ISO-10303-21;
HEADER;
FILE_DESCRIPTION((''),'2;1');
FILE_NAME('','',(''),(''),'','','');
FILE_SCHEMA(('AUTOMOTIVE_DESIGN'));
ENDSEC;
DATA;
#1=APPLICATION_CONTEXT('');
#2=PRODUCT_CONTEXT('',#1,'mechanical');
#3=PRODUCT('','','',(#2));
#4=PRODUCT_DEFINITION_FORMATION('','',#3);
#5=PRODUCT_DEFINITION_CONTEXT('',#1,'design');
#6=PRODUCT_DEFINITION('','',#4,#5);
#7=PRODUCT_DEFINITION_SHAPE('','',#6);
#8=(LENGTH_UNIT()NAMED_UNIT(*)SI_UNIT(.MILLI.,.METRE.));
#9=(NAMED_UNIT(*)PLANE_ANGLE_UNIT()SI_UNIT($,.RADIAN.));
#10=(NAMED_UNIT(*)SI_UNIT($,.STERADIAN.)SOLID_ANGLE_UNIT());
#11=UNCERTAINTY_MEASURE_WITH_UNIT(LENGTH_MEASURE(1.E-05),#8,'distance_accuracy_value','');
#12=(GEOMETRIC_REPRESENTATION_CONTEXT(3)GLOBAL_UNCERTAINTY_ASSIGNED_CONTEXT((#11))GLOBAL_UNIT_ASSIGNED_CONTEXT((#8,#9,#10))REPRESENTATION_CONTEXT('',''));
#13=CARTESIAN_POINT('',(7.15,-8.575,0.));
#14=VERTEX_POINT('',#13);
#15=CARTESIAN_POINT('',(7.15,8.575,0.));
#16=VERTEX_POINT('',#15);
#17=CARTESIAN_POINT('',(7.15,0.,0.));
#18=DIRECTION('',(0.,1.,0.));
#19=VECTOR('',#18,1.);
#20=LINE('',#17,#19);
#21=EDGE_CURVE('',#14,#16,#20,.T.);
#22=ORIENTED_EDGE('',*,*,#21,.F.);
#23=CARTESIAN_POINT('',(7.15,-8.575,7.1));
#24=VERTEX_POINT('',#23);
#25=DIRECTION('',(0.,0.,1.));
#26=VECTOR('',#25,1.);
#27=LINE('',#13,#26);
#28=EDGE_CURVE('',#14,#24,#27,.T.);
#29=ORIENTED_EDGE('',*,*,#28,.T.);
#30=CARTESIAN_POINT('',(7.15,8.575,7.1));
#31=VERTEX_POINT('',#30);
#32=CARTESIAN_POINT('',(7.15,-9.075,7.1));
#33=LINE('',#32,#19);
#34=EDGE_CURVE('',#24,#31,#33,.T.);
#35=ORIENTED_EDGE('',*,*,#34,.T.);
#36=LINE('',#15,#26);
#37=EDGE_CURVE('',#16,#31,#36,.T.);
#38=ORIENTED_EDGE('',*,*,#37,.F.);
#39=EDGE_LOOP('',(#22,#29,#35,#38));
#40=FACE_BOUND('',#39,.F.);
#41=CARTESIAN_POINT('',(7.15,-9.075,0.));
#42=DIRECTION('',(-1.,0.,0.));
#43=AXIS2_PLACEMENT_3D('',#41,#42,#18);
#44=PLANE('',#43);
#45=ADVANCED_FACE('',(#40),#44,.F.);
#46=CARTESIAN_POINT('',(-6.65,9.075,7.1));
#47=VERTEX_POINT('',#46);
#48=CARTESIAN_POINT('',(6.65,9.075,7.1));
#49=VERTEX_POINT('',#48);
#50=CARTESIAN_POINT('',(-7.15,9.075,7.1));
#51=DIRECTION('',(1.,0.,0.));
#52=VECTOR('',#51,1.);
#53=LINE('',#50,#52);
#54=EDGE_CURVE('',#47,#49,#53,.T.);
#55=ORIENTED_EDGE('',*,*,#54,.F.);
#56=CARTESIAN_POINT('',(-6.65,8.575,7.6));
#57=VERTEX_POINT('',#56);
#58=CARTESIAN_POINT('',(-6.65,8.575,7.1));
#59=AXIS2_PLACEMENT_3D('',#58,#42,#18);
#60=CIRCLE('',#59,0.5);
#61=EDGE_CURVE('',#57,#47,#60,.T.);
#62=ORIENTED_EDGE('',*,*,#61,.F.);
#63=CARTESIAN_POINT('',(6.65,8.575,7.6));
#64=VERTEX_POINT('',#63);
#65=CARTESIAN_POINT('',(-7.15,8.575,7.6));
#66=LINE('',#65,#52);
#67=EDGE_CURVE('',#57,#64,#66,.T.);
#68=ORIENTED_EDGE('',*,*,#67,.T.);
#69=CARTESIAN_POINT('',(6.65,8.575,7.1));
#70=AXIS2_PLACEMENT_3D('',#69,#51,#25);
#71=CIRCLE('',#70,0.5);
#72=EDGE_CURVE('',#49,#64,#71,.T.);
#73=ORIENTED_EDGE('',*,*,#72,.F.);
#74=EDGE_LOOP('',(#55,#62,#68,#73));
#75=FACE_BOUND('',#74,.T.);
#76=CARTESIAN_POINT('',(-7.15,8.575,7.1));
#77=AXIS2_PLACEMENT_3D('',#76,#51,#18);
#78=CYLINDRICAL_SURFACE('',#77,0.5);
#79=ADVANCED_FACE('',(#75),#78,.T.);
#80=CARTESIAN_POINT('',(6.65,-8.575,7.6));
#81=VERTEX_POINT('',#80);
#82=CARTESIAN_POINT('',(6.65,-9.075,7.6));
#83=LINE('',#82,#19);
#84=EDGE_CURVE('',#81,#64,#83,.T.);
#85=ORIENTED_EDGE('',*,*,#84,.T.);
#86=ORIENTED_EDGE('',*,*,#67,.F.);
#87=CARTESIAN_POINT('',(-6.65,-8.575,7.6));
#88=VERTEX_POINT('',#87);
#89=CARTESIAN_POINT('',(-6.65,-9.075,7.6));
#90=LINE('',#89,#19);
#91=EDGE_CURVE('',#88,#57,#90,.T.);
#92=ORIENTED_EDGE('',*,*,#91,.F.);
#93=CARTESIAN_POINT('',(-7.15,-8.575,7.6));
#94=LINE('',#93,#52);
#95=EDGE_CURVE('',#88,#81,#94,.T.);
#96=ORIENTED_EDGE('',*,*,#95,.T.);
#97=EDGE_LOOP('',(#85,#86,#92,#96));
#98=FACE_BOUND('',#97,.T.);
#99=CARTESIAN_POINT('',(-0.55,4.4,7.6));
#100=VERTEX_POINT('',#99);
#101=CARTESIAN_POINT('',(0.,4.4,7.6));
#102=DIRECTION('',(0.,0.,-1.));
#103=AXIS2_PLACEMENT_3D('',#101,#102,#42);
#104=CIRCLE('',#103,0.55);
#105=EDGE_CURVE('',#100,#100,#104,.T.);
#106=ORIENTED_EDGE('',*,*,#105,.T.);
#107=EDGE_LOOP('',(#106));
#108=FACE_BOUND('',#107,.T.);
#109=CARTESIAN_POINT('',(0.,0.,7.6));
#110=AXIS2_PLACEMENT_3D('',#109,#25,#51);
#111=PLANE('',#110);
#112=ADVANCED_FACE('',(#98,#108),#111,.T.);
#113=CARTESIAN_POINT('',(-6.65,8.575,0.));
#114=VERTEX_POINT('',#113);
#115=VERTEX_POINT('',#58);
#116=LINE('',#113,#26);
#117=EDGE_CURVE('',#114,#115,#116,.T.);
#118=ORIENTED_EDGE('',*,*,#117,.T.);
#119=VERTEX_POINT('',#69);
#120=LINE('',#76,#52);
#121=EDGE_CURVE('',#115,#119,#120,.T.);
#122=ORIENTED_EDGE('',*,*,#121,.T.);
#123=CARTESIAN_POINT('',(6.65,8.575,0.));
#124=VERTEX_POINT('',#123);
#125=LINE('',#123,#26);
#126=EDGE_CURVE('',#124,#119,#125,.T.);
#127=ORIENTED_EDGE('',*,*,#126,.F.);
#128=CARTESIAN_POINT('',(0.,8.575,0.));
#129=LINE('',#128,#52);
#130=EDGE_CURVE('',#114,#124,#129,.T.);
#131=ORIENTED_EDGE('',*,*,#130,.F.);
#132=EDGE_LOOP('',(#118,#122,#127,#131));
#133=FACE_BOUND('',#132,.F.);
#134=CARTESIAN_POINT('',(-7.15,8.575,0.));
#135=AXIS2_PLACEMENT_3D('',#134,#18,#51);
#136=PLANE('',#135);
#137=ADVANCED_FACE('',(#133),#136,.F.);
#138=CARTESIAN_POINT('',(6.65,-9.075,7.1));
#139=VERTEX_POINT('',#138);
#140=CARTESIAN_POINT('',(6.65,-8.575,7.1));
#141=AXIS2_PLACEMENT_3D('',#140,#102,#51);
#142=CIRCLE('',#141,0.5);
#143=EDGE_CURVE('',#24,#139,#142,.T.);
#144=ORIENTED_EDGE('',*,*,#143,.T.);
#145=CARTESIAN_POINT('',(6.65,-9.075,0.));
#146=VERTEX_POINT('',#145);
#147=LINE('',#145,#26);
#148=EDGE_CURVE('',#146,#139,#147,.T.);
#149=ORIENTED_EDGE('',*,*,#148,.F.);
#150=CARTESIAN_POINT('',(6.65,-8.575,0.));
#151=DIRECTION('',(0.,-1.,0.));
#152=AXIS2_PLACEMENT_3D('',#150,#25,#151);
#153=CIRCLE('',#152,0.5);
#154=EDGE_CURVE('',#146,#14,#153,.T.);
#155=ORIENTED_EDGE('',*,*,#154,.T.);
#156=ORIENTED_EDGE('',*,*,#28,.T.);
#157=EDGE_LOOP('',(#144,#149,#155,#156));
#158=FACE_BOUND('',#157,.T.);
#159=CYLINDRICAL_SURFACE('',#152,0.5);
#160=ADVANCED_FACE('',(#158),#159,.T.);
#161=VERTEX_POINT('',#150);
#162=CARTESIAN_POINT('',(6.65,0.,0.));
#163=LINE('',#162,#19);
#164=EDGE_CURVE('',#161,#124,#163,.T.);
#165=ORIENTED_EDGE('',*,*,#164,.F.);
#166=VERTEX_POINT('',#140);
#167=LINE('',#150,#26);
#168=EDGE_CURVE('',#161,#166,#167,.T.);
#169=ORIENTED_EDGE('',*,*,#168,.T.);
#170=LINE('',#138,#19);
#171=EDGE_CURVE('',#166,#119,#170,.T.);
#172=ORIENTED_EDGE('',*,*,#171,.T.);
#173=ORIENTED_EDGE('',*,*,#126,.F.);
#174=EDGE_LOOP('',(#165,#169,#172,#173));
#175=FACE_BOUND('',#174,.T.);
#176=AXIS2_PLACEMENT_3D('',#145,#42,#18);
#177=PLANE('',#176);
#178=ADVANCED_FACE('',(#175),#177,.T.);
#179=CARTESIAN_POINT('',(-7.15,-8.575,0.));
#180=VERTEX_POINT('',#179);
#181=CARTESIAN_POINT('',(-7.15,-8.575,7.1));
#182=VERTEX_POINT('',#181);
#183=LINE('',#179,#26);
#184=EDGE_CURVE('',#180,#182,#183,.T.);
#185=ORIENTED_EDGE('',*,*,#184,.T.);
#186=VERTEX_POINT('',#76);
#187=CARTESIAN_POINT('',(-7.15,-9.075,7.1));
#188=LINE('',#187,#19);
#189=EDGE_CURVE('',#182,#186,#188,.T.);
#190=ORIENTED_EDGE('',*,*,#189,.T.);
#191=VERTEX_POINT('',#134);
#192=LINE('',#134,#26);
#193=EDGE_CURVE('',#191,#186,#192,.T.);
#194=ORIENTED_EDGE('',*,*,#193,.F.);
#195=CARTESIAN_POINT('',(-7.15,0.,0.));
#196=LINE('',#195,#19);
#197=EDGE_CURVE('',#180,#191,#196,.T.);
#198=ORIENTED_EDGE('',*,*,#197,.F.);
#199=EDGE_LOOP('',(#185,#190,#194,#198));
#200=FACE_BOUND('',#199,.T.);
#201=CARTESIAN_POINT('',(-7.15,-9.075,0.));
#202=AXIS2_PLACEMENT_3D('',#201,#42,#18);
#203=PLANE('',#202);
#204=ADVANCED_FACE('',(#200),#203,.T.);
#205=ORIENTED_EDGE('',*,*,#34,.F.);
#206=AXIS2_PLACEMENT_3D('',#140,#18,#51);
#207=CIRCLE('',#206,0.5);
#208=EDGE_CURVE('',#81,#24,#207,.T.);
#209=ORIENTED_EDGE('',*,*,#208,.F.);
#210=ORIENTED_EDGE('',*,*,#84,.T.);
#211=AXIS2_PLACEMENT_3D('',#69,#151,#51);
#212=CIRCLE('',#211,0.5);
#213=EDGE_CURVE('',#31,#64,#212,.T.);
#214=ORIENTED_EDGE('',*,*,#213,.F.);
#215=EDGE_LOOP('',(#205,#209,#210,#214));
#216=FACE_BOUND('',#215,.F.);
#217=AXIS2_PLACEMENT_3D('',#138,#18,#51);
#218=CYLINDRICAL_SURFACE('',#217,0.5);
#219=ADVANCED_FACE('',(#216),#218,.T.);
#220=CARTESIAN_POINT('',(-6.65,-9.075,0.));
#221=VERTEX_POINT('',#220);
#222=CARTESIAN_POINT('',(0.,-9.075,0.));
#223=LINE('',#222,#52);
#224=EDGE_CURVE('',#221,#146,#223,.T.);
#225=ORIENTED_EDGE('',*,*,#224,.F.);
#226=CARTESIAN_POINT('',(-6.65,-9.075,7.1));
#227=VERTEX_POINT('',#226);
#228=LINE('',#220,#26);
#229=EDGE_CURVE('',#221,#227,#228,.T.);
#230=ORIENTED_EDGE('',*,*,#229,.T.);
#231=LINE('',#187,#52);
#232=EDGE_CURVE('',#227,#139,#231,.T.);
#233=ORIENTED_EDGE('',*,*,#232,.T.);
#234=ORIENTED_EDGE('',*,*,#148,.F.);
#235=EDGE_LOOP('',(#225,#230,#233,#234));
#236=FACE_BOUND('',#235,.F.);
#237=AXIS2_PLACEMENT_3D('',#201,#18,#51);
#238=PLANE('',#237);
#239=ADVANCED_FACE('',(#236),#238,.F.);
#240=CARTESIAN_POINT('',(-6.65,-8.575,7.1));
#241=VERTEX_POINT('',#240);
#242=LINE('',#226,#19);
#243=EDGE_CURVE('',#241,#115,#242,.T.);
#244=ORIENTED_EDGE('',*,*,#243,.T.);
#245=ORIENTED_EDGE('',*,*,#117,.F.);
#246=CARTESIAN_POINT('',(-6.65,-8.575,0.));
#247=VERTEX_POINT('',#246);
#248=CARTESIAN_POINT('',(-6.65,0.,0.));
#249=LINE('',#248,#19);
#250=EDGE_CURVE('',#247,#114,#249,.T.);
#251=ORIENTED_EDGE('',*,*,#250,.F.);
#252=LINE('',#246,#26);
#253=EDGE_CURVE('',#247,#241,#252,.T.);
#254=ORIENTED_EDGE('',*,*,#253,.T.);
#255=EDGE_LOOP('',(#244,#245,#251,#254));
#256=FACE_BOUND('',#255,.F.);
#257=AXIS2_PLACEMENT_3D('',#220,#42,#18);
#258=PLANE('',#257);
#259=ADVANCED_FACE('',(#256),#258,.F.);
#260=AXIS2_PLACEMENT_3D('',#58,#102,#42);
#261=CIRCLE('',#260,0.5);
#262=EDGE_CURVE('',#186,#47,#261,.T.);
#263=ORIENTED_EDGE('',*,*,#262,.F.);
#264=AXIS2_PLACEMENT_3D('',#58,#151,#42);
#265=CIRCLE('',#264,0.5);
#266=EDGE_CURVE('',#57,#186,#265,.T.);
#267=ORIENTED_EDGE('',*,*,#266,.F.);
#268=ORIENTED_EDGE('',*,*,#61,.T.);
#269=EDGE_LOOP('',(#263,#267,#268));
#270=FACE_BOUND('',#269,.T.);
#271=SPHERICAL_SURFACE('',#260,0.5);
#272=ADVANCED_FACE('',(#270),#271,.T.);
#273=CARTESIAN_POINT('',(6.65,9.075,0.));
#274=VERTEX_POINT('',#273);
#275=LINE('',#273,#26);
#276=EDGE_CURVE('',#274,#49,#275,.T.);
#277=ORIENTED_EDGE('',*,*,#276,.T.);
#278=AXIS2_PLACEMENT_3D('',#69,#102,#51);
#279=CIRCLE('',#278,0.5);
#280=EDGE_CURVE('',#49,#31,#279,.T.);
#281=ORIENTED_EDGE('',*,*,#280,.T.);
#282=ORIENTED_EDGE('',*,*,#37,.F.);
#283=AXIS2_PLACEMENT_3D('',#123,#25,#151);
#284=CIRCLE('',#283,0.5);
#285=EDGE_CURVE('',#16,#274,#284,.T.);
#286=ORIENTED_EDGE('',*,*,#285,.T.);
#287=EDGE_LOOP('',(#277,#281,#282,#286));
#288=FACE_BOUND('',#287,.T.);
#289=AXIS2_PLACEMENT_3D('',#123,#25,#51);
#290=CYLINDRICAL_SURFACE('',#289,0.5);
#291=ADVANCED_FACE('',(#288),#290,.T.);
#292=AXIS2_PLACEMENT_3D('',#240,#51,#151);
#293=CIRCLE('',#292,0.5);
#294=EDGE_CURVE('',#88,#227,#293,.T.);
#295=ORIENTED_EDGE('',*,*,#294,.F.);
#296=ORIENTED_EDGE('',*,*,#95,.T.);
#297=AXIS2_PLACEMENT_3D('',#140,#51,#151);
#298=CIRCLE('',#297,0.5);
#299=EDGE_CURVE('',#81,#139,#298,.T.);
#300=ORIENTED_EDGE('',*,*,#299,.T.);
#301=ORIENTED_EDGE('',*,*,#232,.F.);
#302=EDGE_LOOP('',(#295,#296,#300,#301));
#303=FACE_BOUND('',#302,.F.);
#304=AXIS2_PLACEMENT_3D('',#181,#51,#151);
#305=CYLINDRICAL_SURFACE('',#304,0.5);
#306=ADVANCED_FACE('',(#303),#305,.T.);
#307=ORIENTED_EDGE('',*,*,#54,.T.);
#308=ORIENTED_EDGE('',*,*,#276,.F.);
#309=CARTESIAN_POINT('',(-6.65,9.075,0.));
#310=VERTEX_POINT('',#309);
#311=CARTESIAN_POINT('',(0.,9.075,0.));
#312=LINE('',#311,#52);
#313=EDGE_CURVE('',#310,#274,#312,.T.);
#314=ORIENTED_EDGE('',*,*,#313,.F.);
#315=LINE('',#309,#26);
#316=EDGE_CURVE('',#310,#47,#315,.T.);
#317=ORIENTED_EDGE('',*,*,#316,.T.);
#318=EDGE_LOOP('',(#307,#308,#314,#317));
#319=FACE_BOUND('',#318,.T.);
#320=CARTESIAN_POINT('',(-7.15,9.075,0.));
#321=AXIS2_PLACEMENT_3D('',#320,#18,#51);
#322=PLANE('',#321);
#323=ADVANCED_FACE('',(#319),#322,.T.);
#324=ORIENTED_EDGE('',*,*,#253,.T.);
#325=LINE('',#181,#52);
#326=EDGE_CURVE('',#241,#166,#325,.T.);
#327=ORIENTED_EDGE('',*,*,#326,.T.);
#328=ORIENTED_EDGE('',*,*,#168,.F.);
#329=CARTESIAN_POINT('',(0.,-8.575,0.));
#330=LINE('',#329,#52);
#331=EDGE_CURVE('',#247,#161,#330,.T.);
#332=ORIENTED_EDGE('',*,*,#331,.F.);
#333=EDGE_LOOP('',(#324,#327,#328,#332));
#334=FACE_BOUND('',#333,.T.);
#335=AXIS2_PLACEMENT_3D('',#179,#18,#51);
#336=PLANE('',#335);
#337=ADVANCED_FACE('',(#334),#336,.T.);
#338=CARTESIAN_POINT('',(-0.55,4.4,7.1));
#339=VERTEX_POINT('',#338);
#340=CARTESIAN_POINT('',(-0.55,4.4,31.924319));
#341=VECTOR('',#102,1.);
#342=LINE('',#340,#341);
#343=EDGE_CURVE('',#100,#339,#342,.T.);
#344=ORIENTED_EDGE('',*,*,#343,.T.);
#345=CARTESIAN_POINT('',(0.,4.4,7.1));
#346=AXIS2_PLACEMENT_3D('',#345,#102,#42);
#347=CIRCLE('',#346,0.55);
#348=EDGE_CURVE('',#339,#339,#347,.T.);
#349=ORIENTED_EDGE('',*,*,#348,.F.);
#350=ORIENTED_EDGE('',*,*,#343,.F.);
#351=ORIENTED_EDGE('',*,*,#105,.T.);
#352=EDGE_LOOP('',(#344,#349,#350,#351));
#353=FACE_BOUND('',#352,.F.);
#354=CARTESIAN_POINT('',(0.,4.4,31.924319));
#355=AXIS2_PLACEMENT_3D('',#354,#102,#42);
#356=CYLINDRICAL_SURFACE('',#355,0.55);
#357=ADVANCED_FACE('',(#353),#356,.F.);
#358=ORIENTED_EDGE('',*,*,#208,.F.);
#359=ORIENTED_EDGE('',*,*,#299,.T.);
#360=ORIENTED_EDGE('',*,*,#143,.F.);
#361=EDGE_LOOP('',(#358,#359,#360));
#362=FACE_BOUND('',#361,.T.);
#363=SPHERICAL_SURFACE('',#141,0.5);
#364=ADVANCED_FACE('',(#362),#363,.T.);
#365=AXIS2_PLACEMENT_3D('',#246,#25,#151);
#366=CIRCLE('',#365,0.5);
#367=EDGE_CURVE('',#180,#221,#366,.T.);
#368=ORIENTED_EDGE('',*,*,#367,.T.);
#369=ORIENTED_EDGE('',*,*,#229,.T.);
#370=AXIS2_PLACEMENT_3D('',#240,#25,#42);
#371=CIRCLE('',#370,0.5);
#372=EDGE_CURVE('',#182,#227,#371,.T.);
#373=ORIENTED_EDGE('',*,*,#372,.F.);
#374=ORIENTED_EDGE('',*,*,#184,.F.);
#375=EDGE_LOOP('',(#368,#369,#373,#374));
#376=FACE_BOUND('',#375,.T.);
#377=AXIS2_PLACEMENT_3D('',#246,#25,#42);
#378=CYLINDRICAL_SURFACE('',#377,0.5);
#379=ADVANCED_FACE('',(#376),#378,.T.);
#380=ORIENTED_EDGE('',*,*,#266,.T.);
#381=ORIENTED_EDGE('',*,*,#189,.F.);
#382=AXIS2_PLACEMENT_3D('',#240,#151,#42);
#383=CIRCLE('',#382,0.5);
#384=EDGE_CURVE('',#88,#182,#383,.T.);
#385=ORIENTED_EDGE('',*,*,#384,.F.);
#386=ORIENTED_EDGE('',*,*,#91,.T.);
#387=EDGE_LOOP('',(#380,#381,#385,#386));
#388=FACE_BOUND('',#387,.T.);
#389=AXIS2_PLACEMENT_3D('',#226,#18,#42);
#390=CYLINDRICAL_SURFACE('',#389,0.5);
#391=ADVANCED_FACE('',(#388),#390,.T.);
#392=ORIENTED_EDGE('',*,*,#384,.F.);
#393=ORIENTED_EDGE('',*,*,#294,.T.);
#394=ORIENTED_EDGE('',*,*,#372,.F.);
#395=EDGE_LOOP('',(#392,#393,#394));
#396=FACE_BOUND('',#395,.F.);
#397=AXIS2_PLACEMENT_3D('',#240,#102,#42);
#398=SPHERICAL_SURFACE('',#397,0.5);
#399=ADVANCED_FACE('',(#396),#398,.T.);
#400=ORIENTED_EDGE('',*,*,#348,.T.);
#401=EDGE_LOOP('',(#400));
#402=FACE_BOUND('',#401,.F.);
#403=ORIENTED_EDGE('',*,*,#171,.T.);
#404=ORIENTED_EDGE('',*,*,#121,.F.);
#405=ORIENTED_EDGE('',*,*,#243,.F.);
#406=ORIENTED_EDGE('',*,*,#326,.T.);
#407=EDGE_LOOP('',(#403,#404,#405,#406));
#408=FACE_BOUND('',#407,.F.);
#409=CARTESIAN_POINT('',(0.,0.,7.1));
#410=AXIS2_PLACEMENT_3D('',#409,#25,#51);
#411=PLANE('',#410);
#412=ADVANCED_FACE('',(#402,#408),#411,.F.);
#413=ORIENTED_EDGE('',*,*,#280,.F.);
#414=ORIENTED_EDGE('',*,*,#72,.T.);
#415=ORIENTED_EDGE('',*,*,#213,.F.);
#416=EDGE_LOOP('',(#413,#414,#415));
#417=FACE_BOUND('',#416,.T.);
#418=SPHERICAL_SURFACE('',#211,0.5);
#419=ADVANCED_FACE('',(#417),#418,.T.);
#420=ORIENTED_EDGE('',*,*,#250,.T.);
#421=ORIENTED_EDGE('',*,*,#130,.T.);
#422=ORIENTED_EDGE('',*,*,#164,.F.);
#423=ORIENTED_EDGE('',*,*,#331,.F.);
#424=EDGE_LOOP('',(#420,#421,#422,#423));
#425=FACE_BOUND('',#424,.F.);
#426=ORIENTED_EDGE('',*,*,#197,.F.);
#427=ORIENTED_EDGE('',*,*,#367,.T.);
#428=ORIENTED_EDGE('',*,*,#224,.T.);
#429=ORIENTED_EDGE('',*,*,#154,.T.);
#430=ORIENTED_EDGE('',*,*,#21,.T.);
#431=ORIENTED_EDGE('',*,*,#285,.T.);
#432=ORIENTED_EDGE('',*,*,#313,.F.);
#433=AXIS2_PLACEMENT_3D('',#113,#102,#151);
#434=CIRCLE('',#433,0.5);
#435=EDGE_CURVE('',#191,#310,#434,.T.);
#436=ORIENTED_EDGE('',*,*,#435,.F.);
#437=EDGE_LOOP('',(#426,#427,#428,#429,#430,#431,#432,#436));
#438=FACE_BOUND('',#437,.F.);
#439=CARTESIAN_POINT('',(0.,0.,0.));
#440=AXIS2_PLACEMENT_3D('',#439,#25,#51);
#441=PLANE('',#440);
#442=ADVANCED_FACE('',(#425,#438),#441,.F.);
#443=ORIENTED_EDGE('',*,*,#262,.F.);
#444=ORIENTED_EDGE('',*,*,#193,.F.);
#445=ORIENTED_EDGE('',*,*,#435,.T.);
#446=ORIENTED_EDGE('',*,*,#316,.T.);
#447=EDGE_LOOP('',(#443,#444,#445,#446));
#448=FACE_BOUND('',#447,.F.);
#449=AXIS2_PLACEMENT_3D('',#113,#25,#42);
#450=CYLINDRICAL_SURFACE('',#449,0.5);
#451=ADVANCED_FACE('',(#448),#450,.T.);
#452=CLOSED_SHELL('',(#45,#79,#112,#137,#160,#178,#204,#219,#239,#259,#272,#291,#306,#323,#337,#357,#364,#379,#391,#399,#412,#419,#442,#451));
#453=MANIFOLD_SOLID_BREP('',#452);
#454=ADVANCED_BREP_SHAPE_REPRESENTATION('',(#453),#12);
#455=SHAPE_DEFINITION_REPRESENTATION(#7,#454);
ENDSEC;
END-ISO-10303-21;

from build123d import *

# Parameters (mm, degrees)
F3_W     = 14.3
F3_H     = 18.15
F4_DEPTH = 7.6
F5_R     = 0.5
F0_T     = 0.5
F2_D     = 1.1


# Not quite as in the source:
# - a shell that OpenCascade refuses in one call is made with other operations: the cavity is built on its own and cut out


with BuildPart() as f4:
    # F3 (on Top) → F4 (new body)
    with BuildSketch(Plane.XY):
        Rectangle(F3_W, F3_H)
    extrude(amount=F4_DEPTH)

    # F5
    f5_edges = [f4.edges().sort_by_distance(p)[0] for p in [
        (-7.15, -9.075, 3.8),
        (7.15, -9.075, 3.8),
        (7.15, 0, 7.6),
        (-7.15, 9.075, 3.8),
        (7.15, 9.075, 3.8),
        (-7.15, 0, 7.6),
        (0, 9.075, 7.6),
        (0, -9.075, 7.6),
    ]]
    fillet(f5_edges, radius=F5_R)

    # F0: shell of thickness 0.5, made by hand


with BuildPart() as f0_core1:
    # F0_t2: copy of F4
    add(f4.part)

    # the walls: a layer under each face that stays
    f0_faces = [f0_core1.faces().sort_by_distance(p)[0] for p in [
        (0, -9.075, 3.55),
        (-7.15, 0, 3.55),
        (7.15, 0, 3.55),
        (0, 9.075, 3.55),
        (0, 0, 7.6),
    ]]
    thicken(f0_faces, amount=-F0_T, mode=Mode.SUBTRACT)


with BuildPart() as f4_1:
    add(f4.part)

    # what is left inside the walls is the cavity
    f0_cavity = [f0_core1.part.solids().sort_by_distance(p)[0] for p in [
        (0, -2.858333, 0.005),
    ]]
    add(f0_cavity, mode=Mode.SUBTRACT)

    # F2 (through all)
    with Locations(Plane.XY.offset(7.6)):
        with Locations((0, 4.4)):
            Hole(F2_D / 2)


solid = f4_1.part
